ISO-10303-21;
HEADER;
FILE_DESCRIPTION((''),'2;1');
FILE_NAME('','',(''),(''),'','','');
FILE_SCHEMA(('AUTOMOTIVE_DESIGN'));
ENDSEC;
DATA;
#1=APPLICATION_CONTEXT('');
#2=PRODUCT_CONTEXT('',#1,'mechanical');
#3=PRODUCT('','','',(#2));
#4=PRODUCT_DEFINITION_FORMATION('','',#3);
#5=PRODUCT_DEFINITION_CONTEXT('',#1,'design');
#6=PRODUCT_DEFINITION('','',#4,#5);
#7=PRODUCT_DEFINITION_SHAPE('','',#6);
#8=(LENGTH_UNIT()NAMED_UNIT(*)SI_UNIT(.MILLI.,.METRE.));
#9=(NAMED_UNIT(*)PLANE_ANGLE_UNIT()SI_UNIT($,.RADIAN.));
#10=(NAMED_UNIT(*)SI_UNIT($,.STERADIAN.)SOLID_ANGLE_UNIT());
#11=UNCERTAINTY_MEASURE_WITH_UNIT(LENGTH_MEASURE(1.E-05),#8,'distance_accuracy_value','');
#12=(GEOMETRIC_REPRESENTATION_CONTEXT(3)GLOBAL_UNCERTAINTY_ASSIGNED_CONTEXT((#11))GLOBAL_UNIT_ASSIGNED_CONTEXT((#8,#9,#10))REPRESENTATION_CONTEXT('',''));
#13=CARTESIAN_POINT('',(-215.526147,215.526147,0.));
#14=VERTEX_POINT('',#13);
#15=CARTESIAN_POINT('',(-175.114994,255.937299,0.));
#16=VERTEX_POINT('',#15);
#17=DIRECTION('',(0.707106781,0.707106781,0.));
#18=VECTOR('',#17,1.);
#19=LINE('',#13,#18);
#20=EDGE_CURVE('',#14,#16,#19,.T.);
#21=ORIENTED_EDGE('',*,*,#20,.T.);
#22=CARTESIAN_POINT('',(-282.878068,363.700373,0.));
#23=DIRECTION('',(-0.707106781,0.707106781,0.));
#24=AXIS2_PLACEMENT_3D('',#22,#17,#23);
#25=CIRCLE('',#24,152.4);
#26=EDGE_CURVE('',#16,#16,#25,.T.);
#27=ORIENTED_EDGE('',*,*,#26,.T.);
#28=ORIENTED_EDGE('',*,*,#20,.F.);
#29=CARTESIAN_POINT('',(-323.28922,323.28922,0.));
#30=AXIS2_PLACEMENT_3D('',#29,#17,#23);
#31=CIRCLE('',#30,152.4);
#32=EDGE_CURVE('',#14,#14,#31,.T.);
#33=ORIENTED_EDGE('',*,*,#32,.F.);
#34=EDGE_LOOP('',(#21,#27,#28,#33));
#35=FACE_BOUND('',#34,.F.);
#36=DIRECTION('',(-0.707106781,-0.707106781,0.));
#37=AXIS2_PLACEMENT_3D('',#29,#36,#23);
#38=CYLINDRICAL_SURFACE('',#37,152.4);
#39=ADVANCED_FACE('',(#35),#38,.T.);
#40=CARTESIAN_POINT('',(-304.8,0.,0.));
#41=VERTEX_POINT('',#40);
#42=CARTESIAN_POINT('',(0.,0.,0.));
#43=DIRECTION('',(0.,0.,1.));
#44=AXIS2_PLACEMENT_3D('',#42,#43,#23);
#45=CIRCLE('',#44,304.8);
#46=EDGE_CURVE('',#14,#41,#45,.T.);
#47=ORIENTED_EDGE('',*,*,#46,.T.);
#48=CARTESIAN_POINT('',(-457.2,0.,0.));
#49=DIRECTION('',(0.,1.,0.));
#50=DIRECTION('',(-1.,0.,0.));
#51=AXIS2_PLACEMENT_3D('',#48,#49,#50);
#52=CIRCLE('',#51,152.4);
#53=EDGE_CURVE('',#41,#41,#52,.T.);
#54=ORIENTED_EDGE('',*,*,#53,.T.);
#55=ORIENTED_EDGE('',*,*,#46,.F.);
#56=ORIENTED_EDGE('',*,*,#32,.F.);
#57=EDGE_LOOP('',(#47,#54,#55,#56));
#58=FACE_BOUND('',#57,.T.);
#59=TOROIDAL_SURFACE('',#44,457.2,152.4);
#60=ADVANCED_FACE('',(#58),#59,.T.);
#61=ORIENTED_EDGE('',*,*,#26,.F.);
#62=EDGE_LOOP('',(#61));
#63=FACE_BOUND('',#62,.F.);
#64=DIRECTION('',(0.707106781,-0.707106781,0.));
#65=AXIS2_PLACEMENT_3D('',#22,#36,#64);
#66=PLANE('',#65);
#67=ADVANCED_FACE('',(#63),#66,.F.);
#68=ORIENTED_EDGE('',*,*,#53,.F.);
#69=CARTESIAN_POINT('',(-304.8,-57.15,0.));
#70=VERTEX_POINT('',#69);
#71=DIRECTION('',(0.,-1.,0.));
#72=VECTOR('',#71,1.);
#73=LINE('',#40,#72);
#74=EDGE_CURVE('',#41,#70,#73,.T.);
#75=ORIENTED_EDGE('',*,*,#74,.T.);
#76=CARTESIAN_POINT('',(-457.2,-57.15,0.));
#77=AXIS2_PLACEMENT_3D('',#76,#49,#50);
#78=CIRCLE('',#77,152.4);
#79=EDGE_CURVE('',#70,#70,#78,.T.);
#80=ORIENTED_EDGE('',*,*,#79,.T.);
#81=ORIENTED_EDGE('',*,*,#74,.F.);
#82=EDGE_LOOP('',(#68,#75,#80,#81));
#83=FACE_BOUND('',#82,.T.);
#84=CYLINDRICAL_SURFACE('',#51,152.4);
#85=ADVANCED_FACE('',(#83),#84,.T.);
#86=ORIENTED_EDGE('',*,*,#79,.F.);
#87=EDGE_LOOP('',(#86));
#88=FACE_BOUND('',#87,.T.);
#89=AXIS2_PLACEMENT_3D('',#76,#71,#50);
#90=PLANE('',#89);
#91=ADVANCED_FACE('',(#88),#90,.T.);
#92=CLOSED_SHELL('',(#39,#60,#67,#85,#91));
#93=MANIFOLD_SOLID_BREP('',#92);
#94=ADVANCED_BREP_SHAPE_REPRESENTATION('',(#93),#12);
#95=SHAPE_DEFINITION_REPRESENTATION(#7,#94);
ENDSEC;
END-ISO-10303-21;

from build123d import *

# Parameters (mm, degrees)
F0_R     = 152.4
F3_DEPTH = 57.15
F4_DEPTH = 57.15


with BuildPart() as f2:
    # F2: sweep along a path in F1
    with BuildLine(Plane.XY) as f2_path:
        ThreePointArc((-323.2892203585, 323.2892203585), (-422.3977222642, 174.9628652773), (-457.2, 0))
    # F0 (on Front) → F2 (sweep)
    with BuildSketch(Plane.XZ):
        with Locations((-457.2, 0)):
            Circle(F0_R)
    sweep(path=f2_path.line)

    # F3 (add): a face of the model
    f3_faces = [f2.faces().sort_by_distance(p)[0] for p in [
        (-457.2, 0, 0),
    ]]
    extrude(f3_faces, amount=F3_DEPTH)

    # F4 (add): a face of the model
    f4_faces = [f2.faces().sort_by_distance(p)[0] for p in [
        (-323.2892203585, 323.2892203585, 0),
    ]]
    extrude(f4_faces, amount=F4_DEPTH)


solid = f2.part
